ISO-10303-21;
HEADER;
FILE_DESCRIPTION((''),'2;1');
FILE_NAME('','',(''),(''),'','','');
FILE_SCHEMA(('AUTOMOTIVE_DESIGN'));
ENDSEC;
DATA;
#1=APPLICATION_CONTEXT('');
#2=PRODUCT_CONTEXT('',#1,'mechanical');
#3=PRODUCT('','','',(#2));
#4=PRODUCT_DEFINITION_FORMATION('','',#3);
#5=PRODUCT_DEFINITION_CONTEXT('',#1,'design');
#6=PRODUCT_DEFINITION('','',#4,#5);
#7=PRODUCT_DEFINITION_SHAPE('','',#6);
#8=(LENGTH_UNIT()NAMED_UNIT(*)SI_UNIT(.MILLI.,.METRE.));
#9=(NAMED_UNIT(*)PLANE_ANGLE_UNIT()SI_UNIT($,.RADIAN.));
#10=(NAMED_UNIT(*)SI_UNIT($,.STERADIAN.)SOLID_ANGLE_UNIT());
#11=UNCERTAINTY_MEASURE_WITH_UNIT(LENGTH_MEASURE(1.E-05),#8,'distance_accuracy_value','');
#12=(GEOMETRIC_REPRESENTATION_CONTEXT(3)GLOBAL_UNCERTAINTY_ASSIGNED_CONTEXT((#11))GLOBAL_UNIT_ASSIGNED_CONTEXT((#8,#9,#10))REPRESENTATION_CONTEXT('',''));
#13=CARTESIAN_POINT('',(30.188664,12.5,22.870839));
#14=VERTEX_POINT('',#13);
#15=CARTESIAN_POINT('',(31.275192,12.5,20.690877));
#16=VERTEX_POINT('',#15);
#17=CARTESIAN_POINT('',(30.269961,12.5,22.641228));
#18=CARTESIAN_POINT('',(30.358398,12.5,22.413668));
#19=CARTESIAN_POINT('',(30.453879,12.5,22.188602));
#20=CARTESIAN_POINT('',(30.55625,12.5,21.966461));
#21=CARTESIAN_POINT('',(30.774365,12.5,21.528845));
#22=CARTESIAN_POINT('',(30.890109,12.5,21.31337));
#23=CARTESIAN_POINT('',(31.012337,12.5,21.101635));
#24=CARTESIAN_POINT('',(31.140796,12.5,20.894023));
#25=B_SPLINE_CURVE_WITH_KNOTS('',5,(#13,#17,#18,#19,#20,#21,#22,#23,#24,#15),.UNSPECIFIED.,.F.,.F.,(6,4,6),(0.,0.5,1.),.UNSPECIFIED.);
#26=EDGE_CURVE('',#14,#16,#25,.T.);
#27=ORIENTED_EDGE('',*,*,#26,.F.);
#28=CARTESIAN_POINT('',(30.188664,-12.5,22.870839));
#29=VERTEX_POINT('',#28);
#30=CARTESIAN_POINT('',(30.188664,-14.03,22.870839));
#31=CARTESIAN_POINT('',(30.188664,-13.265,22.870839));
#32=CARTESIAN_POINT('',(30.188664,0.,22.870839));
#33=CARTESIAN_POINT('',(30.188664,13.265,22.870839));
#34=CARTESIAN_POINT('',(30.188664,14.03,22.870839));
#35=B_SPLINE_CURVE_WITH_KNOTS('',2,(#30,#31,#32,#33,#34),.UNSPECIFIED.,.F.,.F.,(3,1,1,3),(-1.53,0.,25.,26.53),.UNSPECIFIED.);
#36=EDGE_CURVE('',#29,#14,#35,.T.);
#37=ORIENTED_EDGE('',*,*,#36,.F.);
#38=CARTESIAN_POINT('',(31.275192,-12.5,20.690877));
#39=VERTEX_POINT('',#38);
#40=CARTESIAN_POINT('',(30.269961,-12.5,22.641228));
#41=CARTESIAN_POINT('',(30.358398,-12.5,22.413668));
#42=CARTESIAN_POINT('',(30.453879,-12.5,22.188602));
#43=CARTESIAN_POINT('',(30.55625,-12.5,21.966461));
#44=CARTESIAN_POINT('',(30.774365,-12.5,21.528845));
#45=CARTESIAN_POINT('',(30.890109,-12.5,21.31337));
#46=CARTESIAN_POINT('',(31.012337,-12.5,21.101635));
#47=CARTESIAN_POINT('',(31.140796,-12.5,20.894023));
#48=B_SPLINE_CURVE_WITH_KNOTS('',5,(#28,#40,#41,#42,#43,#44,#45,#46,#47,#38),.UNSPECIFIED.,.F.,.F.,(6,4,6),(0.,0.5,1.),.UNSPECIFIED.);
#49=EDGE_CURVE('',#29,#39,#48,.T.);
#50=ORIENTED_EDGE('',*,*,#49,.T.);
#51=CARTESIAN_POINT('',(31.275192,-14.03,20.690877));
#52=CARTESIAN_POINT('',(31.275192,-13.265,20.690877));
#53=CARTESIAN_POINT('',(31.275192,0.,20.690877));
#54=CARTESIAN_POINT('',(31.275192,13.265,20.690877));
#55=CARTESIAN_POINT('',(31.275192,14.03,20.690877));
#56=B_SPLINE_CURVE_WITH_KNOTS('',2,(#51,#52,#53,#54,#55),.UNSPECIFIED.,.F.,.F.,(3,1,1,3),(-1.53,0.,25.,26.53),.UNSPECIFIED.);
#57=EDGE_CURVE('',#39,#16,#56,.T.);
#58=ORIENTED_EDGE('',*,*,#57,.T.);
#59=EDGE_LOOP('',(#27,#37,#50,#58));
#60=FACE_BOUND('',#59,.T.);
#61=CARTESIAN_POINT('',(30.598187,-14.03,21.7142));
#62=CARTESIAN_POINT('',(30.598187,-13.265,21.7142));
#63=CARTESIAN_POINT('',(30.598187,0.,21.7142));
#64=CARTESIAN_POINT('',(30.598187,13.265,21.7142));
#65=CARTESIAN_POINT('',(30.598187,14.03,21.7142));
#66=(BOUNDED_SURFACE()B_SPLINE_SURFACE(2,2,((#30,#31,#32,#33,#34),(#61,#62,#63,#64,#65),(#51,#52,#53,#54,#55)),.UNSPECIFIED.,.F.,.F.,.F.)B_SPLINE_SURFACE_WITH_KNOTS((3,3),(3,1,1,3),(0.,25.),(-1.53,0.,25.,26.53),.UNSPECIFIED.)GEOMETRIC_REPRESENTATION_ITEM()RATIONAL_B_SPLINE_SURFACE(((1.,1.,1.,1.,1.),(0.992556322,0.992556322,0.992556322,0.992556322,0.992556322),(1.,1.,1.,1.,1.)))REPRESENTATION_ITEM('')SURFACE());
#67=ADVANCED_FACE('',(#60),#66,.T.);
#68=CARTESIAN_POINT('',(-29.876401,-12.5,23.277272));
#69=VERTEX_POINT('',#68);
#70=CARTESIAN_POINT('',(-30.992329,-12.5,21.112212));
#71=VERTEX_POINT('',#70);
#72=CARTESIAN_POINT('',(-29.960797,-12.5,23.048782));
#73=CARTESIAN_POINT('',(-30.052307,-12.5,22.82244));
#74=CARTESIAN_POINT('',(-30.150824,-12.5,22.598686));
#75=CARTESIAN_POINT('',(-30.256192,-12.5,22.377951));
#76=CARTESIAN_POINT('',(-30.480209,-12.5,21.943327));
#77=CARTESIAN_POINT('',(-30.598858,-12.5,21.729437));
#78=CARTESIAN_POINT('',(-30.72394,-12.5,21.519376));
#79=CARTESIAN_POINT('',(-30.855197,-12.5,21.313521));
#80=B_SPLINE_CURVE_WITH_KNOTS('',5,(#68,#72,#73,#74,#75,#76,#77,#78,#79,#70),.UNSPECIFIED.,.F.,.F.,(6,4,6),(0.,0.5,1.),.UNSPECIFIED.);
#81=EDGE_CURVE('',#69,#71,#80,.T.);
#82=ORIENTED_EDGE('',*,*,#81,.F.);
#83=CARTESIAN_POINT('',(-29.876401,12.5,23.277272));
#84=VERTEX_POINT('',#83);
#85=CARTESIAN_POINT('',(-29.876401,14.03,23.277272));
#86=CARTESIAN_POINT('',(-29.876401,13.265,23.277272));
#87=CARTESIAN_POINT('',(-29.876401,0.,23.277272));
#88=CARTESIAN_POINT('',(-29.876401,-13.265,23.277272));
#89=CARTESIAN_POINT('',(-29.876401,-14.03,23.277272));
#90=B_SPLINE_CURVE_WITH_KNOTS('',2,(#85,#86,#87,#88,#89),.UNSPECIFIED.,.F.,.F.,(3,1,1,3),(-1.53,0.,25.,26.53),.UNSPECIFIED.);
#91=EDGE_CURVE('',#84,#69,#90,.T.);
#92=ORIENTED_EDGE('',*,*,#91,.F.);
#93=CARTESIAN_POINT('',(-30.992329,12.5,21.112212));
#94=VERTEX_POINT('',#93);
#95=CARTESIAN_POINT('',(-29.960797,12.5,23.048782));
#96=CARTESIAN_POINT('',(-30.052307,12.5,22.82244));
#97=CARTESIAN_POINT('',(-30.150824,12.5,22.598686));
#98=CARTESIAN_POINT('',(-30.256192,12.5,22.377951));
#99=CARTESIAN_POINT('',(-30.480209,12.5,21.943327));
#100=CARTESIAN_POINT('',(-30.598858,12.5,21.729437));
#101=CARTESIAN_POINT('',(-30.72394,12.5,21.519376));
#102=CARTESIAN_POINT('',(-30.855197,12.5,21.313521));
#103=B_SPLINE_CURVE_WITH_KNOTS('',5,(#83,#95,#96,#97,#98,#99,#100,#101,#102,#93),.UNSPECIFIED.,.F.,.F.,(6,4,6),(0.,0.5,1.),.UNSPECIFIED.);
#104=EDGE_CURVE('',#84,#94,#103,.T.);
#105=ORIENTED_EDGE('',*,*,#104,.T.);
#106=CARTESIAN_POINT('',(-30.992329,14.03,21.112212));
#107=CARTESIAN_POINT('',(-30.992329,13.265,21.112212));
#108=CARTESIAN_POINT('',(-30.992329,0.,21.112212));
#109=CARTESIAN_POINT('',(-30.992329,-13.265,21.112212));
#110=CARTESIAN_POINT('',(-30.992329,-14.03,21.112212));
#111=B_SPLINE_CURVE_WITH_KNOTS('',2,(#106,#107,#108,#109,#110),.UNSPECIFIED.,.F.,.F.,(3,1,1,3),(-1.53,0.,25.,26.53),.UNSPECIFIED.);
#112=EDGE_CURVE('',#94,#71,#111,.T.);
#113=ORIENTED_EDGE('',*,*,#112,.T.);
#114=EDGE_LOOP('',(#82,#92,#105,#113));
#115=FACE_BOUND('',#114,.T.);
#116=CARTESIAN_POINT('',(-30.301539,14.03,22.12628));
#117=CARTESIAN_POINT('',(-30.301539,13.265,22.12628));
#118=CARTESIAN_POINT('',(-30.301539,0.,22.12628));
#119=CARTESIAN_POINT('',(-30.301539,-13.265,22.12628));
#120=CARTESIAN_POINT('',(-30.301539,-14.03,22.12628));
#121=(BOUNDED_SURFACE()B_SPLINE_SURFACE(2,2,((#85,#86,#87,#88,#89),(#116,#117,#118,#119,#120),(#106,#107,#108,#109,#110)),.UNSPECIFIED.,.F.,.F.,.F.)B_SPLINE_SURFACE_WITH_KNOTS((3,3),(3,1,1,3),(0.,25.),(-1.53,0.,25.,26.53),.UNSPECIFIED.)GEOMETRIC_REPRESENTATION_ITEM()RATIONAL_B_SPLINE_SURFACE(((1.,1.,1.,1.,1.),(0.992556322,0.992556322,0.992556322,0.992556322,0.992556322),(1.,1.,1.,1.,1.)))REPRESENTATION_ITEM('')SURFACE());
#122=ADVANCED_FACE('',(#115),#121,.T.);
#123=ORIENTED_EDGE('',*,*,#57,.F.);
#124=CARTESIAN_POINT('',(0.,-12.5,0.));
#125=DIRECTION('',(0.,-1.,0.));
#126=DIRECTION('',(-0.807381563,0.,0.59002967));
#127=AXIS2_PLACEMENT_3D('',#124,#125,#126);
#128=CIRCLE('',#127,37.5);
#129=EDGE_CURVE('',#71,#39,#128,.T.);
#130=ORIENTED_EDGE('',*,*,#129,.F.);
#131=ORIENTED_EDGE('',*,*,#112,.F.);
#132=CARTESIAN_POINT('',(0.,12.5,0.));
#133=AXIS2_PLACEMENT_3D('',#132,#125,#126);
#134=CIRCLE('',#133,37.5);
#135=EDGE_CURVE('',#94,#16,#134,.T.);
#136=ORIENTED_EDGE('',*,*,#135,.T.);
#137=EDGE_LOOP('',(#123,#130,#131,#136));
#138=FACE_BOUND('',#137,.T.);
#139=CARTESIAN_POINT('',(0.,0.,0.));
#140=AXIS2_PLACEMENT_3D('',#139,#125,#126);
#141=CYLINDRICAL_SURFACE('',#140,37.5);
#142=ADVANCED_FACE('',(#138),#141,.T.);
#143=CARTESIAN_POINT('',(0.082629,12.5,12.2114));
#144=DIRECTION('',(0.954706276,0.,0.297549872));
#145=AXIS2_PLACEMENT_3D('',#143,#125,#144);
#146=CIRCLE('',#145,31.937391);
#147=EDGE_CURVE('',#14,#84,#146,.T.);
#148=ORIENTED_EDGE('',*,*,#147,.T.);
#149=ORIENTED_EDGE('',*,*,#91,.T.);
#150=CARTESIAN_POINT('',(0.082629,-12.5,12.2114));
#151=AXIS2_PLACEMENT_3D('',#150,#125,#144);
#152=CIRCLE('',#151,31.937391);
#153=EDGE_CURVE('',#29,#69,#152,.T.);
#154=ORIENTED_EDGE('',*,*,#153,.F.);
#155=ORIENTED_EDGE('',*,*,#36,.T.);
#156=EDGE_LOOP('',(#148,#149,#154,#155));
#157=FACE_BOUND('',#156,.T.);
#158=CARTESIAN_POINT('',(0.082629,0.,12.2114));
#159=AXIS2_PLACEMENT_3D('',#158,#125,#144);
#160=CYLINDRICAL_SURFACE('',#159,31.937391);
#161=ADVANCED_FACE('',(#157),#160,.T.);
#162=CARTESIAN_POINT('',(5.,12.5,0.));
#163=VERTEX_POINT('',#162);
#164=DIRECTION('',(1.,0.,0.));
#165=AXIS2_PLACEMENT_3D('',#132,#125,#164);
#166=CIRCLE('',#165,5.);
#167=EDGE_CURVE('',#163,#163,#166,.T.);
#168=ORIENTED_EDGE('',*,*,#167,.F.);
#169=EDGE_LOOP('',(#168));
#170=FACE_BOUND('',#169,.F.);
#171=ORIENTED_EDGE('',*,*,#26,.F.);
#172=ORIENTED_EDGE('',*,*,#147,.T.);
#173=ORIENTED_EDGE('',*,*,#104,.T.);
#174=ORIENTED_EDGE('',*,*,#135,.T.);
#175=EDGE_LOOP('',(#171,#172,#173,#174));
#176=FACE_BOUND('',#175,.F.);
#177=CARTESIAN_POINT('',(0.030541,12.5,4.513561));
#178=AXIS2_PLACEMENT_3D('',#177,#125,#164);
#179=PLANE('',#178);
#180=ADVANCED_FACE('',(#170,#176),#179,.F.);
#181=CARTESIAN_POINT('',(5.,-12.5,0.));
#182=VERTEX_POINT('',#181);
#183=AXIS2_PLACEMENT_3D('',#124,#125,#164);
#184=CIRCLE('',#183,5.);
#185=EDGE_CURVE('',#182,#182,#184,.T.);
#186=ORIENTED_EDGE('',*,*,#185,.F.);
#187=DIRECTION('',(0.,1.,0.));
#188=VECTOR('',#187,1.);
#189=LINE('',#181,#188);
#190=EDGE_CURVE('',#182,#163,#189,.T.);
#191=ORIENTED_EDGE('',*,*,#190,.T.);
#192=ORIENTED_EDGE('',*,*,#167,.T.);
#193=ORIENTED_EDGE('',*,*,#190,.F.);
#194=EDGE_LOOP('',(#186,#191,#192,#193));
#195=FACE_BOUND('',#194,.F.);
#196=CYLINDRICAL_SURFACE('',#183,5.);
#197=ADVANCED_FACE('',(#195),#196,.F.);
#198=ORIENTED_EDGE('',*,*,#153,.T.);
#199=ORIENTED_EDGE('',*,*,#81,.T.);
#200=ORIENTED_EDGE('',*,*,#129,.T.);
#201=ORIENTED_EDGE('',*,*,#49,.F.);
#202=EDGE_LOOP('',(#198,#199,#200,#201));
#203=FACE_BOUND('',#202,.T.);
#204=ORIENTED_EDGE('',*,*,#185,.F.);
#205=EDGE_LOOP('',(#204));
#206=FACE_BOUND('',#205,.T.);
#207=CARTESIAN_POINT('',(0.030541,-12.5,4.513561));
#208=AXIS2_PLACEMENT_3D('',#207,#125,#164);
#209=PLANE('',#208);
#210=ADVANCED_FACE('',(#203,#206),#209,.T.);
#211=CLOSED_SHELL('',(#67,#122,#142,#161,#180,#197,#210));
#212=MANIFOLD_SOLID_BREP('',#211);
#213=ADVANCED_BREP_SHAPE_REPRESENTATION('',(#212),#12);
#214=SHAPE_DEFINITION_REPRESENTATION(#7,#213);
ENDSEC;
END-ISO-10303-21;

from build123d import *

# Parameters (mm, degrees)
F1_DEPTH = 12.5
F2_R     = 10
F3_R     = 5
F4_DEPTH = 25.0010001


with BuildPart() as f1:
    # F0 (on Front) → F1 (new body, symmetric)
    with BuildSketch(Plane.XZ):
        with BuildLine():
            ThreePointArc((30.5734569437, 21.7143669149), (0.2987295857, 44.1480604907), (-30.2768086166, 22.1261126273))
            ThreePointArc((-30.2768086166, 22.1261126273), (-0.2537394144, -37.499141541), (30.5734569437, 21.7143669149))
        make_face()
    extrude(amount=F1_DEPTH, both=True)

    # F2
    f2_edges = [f1.edges().sort_by_distance(p)[0] for p in [
        (-30.276809, 0, 22.126113),
        (30.573457, 0, 21.714367),
    ]]
    fillet(f2_edges, radius=F2_R)

    # F3 (on face) → F4 (cut, through all)
    with BuildSketch(Plane.XZ.offset(12.5)):
        Circle(F3_R)
    extrude(amount=-F4_DEPTH, mode=Mode.SUBTRACT)


solid = f1.part
